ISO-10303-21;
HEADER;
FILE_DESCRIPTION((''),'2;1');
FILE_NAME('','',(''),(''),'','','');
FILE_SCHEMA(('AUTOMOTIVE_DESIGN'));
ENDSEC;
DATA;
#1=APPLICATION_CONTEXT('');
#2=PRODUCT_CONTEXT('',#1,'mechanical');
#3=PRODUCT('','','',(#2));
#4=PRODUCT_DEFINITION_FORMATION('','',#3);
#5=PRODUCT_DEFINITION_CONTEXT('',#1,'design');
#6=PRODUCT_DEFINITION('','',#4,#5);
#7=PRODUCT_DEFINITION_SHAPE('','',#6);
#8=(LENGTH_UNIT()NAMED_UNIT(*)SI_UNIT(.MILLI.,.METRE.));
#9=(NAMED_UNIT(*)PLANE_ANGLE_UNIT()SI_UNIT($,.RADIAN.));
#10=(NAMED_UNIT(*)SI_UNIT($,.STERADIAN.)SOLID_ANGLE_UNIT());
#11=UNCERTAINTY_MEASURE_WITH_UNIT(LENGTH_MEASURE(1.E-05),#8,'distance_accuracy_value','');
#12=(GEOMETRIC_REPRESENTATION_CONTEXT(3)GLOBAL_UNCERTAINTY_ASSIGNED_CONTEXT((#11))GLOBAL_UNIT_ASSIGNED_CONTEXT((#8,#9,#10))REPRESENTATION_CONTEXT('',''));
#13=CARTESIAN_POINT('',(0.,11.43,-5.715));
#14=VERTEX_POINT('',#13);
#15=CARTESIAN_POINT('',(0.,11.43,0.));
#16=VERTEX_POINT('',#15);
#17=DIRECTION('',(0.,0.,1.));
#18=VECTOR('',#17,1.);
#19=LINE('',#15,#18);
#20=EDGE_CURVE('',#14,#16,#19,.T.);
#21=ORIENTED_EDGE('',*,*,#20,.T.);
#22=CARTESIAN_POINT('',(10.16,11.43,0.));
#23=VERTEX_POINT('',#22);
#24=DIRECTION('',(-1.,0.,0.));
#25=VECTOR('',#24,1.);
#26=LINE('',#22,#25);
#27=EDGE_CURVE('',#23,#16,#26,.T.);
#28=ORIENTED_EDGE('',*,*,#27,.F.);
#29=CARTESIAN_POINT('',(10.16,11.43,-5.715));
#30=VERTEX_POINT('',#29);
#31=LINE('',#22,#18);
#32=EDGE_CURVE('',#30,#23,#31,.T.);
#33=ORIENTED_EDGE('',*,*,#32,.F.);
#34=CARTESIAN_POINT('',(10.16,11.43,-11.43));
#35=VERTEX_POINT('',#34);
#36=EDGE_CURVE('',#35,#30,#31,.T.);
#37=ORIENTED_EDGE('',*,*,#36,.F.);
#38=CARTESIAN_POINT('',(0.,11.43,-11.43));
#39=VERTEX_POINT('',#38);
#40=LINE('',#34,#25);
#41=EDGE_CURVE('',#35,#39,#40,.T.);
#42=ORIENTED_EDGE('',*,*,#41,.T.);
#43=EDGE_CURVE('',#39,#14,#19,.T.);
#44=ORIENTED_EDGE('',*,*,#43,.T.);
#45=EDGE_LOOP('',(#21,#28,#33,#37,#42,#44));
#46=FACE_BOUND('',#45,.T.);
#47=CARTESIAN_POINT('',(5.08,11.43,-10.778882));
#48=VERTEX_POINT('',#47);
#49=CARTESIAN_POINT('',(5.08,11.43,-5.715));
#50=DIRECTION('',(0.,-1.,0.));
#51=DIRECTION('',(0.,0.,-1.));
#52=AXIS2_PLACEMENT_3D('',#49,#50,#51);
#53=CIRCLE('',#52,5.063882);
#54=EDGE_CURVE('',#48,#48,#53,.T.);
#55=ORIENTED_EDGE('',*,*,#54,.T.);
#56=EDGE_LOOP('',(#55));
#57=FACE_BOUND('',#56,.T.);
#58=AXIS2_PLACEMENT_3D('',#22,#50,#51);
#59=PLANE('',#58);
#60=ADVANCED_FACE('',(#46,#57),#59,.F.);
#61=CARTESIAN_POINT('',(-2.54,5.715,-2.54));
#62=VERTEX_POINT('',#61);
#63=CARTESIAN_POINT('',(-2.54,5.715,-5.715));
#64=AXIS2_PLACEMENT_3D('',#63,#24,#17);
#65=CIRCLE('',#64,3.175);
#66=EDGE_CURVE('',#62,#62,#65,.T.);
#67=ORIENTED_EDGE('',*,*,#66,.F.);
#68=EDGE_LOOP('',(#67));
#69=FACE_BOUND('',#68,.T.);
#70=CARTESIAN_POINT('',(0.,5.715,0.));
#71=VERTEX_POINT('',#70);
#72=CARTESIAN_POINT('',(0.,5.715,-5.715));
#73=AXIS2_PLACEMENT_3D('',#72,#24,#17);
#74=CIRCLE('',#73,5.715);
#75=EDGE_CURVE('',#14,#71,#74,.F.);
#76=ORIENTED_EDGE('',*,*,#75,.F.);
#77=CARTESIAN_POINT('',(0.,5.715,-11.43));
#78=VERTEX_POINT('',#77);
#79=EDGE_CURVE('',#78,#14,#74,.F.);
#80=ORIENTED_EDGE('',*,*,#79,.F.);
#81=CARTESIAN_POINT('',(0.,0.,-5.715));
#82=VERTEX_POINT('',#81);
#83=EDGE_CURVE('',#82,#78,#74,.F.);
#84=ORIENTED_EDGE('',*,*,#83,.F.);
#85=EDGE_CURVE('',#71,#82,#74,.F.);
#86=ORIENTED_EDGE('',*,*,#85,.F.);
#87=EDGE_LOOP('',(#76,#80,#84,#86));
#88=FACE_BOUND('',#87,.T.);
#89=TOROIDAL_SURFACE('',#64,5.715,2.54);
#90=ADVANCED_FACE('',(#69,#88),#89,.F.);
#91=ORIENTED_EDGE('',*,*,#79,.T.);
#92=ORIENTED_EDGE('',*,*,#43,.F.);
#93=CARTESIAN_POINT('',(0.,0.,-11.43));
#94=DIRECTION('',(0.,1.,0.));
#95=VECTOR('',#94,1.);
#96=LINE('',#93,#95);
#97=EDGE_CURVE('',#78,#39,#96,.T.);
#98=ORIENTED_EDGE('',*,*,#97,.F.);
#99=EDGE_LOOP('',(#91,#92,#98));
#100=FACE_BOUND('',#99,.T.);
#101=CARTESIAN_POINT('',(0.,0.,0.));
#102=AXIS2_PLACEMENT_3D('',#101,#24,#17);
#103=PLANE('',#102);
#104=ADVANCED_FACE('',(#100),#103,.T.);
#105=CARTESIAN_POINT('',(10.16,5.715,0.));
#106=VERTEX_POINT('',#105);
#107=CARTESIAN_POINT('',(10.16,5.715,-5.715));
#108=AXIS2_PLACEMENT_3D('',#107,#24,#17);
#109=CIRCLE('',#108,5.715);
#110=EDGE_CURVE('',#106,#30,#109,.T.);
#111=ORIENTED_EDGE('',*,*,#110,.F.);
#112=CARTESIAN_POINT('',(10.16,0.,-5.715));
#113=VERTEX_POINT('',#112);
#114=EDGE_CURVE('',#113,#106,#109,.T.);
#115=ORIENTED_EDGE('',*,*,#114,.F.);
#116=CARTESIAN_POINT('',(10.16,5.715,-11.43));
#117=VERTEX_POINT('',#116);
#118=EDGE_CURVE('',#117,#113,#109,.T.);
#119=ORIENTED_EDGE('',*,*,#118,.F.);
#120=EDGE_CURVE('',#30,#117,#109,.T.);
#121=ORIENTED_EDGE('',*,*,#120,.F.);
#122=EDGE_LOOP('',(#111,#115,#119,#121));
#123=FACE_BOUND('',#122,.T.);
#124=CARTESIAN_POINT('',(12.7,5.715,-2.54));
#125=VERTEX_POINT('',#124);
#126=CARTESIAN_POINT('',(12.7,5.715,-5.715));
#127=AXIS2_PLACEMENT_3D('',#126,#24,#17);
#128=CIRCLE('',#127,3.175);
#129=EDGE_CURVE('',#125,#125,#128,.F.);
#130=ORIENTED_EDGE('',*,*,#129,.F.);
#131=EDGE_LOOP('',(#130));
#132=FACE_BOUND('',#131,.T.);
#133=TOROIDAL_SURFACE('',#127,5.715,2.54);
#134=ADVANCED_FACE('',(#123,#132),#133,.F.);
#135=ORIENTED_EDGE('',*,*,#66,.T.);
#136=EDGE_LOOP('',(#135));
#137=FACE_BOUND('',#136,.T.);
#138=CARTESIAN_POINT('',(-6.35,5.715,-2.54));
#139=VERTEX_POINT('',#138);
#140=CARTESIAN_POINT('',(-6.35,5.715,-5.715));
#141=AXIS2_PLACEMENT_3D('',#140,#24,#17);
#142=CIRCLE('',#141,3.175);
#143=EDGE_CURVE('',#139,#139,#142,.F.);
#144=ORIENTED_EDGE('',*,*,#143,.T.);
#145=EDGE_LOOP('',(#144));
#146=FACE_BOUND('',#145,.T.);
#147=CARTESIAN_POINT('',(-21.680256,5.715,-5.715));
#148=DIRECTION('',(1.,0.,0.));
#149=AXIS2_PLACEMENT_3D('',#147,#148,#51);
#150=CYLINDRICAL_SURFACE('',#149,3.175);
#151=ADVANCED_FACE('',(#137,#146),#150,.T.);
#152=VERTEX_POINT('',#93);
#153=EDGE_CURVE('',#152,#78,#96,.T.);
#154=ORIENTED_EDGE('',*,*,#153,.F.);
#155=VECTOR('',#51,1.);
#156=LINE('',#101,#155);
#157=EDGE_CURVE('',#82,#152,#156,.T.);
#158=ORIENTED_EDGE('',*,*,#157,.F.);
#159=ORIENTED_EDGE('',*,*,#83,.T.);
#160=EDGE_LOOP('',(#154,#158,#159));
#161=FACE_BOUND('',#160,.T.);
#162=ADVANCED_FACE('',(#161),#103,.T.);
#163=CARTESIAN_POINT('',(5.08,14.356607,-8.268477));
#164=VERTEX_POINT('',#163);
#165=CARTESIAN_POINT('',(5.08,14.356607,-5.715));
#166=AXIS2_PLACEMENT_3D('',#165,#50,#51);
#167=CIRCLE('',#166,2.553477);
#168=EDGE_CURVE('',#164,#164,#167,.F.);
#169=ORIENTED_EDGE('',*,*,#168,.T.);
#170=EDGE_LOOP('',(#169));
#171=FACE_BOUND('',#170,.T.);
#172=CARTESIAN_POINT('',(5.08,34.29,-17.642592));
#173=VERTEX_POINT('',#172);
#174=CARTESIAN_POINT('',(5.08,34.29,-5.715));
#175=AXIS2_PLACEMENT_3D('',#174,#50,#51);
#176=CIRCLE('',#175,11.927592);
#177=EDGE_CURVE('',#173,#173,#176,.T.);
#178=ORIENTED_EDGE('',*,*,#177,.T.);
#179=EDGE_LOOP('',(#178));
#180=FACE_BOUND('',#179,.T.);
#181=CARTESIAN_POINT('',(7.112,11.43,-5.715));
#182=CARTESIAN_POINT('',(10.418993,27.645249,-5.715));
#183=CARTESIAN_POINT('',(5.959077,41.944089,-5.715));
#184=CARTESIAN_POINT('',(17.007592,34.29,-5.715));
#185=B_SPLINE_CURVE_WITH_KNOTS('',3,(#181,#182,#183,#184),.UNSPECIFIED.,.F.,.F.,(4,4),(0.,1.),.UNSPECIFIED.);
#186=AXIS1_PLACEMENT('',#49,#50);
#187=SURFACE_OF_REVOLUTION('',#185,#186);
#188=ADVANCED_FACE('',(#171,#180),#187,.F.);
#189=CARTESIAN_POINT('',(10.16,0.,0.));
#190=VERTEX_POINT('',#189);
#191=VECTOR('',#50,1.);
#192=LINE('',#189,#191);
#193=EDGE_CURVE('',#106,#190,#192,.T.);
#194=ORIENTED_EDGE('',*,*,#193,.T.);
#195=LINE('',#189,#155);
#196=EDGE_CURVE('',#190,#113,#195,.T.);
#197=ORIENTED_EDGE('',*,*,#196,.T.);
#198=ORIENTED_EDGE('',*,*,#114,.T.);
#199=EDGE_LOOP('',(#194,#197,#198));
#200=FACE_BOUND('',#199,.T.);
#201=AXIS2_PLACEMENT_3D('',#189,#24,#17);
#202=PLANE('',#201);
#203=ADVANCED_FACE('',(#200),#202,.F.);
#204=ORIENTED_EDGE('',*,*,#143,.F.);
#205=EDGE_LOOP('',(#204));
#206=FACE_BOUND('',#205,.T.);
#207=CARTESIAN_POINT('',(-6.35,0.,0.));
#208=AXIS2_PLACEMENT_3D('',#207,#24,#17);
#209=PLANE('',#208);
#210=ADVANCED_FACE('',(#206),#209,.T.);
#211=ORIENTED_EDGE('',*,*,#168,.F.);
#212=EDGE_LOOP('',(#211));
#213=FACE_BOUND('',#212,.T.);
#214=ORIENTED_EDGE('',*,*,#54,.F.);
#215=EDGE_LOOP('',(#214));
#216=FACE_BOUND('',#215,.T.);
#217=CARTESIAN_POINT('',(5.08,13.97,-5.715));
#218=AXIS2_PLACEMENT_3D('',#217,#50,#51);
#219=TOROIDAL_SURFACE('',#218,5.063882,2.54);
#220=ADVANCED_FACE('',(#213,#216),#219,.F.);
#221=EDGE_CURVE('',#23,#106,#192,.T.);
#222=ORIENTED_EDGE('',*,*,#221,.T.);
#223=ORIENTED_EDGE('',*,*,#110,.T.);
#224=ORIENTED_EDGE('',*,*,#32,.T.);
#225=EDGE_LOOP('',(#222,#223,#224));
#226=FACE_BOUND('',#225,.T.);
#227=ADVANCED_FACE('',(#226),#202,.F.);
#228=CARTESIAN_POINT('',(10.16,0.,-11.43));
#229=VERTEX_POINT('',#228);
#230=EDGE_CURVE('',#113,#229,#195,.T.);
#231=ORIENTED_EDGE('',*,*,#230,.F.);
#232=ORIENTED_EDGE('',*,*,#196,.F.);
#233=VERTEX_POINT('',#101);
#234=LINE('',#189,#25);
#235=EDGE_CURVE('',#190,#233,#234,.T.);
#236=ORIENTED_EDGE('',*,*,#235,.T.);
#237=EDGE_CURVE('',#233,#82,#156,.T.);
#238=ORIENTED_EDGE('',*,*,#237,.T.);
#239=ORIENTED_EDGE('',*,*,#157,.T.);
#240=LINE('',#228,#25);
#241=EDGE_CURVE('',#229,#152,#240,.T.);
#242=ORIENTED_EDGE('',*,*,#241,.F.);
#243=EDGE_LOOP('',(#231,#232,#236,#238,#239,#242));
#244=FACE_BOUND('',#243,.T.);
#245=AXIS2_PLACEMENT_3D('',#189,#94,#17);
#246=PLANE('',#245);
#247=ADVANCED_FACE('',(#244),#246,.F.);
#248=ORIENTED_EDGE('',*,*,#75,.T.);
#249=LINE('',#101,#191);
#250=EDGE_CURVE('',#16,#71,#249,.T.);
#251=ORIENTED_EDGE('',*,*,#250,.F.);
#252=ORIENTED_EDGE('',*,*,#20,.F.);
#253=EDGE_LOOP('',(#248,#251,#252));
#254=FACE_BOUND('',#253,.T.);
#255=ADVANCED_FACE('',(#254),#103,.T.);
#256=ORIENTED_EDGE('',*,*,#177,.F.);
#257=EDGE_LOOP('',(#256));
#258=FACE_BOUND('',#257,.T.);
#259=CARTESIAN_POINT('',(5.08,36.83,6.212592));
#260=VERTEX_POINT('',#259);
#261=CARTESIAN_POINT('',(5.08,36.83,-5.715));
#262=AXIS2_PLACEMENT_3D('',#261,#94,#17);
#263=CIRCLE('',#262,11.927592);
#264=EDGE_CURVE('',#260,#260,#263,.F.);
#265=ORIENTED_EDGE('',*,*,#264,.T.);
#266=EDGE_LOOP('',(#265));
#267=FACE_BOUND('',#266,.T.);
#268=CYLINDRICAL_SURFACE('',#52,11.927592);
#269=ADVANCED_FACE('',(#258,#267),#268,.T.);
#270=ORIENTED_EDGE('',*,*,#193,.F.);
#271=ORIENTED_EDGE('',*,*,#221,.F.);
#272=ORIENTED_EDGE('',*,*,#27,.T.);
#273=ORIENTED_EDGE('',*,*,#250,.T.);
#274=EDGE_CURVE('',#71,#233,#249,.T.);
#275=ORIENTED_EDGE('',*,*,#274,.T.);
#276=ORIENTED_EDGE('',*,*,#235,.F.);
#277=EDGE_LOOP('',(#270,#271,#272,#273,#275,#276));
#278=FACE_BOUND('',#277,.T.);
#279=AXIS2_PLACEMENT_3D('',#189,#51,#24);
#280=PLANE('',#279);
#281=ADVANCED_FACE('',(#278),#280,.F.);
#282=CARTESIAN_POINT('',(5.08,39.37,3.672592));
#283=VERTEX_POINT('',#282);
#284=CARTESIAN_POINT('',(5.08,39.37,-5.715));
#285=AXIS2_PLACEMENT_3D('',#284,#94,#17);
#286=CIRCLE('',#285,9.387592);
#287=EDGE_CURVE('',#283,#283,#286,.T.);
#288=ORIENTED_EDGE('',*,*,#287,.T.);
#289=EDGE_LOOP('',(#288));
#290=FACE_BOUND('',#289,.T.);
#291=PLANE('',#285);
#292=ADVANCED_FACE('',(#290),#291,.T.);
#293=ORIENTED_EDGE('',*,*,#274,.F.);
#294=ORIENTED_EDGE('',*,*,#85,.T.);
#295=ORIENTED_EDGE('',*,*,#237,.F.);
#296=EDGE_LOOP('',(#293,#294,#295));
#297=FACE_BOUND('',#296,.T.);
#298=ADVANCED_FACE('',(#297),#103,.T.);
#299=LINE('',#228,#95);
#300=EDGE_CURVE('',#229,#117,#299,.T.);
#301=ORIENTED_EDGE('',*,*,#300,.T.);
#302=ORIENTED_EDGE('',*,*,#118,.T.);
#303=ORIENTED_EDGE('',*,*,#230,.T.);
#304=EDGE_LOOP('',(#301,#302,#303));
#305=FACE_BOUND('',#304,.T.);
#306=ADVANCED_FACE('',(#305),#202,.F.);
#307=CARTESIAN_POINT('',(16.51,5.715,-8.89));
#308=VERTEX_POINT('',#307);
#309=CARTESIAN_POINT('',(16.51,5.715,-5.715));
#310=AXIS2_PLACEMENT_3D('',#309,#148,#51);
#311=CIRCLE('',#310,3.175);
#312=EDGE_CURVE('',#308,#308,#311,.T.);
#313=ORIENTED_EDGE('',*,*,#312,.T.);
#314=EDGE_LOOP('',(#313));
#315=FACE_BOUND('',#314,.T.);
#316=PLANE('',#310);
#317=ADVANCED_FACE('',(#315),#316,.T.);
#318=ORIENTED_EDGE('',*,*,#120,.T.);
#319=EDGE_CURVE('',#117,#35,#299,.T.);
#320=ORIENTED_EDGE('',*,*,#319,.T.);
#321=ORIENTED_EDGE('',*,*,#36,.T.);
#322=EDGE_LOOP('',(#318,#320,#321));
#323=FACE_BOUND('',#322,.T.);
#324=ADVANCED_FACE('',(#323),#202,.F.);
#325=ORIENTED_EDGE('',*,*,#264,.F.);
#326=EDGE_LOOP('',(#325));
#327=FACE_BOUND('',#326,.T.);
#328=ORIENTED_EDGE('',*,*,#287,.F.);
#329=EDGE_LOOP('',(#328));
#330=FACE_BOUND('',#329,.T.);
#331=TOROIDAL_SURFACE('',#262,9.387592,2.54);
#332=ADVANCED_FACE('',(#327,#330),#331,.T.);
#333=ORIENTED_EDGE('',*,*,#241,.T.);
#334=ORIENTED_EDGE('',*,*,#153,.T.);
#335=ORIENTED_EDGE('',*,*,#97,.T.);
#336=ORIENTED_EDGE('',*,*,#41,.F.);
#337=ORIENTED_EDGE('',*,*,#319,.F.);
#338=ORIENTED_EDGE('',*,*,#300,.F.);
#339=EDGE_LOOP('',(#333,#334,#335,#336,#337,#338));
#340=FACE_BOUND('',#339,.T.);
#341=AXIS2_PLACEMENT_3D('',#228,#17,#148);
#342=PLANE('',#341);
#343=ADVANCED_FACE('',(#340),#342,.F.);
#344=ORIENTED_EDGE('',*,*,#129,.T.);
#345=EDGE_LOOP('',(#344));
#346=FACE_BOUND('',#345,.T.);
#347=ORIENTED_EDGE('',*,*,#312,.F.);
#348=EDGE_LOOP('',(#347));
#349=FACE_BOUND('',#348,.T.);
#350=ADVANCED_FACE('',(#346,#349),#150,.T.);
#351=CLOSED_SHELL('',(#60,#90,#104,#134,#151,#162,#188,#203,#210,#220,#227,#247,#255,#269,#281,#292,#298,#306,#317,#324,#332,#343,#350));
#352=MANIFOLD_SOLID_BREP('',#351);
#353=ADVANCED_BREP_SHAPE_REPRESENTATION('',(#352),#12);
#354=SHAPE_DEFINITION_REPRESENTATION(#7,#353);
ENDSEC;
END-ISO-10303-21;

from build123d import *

# Parameters (mm, degrees)
SKETCH2_W          = 11.43
SKETCH2_H          = 11.43
CENTRAL_BOX_DEPTH  = 10.16
NIBBLES_DEPTH      = 6.35
NIBBLES_DEPTH_BACK = 16.51
SKETCH4_R          = 3.175
YAY_ROUNDED_R      = 2.54


with BuildPart() as part:
    # Sketch2 → central box (new body)
    with BuildSketch(Plane(origin=(0, 0, 0), x_dir=(0, 0, -1), z_dir=(1, 0, 0))):
        with Locations((5.715, 5.715)):
            Rectangle(SKETCH2_W, SKETCH2_H)
    extrude(amount=CENTRAL_BOX_DEPTH)

    # Sketch4 → nibbles (add, two sides: drawn at the far end of the back side and taken through both)
    with BuildSketch(Plane(origin=(10.16, 0, 0), x_dir=(0, 0, -1), z_dir=(1, 0, 0)).offset(-NIBBLES_DEPTH_BACK)):
        with Locations(Location((5.715, 5.715, 0), (0, 0, 180))):
            Circle(SKETCH4_R)
    extrude(amount=NIBBLES_DEPTH + NIBBLES_DEPTH_BACK)

    # Sketch6 → stick (revolve)
    with BuildSketch(Plane.XY.offset(-5.715), mode=Mode.PRIVATE) as stick_sk:
        with BuildLine():
            Line((5.08, 11.43), (5.08, 39.37))
            Line((5.08, 39.37), (17.007592302, 39.37))
            Line((17.007592302, 39.37), (17.007592302, 34.29))
            add(Edge.make_bspline(
                [(17.007592302, 34.29), (5.959076516, 41.944088777), (10.418992682, 27.645249109), (7.112, 11.43)],
                knots=[0, 0, 0, 0, 1, 1, 1, 1], degree=3))
            Line((7.112, 11.43), (5.08, 11.43))
        make_face()
    revolve(stick_sk.sketch.rotate(Axis((5.08, 11.43, -5.715), (0, 1, 0)), 90), axis=Axis((5.08, 11.43, -5.715), (0, 1, 0)))

    # yay, rounded
    yay_rounded_edges = [part.edges().sort_by_distance(p)[0] for p in [
        (0, 5.715, -8.89),
        (10.16, 5.715, -8.89),
        (5.08, 11.43, -3.683),
        (5.08, 39.37, 6.212592302),
    ]]
    fillet(yay_rounded_edges, radius=YAY_ROUNDED_R - 0.0001)  # a hair under: the kernel refuses the full size


solid = part.part
